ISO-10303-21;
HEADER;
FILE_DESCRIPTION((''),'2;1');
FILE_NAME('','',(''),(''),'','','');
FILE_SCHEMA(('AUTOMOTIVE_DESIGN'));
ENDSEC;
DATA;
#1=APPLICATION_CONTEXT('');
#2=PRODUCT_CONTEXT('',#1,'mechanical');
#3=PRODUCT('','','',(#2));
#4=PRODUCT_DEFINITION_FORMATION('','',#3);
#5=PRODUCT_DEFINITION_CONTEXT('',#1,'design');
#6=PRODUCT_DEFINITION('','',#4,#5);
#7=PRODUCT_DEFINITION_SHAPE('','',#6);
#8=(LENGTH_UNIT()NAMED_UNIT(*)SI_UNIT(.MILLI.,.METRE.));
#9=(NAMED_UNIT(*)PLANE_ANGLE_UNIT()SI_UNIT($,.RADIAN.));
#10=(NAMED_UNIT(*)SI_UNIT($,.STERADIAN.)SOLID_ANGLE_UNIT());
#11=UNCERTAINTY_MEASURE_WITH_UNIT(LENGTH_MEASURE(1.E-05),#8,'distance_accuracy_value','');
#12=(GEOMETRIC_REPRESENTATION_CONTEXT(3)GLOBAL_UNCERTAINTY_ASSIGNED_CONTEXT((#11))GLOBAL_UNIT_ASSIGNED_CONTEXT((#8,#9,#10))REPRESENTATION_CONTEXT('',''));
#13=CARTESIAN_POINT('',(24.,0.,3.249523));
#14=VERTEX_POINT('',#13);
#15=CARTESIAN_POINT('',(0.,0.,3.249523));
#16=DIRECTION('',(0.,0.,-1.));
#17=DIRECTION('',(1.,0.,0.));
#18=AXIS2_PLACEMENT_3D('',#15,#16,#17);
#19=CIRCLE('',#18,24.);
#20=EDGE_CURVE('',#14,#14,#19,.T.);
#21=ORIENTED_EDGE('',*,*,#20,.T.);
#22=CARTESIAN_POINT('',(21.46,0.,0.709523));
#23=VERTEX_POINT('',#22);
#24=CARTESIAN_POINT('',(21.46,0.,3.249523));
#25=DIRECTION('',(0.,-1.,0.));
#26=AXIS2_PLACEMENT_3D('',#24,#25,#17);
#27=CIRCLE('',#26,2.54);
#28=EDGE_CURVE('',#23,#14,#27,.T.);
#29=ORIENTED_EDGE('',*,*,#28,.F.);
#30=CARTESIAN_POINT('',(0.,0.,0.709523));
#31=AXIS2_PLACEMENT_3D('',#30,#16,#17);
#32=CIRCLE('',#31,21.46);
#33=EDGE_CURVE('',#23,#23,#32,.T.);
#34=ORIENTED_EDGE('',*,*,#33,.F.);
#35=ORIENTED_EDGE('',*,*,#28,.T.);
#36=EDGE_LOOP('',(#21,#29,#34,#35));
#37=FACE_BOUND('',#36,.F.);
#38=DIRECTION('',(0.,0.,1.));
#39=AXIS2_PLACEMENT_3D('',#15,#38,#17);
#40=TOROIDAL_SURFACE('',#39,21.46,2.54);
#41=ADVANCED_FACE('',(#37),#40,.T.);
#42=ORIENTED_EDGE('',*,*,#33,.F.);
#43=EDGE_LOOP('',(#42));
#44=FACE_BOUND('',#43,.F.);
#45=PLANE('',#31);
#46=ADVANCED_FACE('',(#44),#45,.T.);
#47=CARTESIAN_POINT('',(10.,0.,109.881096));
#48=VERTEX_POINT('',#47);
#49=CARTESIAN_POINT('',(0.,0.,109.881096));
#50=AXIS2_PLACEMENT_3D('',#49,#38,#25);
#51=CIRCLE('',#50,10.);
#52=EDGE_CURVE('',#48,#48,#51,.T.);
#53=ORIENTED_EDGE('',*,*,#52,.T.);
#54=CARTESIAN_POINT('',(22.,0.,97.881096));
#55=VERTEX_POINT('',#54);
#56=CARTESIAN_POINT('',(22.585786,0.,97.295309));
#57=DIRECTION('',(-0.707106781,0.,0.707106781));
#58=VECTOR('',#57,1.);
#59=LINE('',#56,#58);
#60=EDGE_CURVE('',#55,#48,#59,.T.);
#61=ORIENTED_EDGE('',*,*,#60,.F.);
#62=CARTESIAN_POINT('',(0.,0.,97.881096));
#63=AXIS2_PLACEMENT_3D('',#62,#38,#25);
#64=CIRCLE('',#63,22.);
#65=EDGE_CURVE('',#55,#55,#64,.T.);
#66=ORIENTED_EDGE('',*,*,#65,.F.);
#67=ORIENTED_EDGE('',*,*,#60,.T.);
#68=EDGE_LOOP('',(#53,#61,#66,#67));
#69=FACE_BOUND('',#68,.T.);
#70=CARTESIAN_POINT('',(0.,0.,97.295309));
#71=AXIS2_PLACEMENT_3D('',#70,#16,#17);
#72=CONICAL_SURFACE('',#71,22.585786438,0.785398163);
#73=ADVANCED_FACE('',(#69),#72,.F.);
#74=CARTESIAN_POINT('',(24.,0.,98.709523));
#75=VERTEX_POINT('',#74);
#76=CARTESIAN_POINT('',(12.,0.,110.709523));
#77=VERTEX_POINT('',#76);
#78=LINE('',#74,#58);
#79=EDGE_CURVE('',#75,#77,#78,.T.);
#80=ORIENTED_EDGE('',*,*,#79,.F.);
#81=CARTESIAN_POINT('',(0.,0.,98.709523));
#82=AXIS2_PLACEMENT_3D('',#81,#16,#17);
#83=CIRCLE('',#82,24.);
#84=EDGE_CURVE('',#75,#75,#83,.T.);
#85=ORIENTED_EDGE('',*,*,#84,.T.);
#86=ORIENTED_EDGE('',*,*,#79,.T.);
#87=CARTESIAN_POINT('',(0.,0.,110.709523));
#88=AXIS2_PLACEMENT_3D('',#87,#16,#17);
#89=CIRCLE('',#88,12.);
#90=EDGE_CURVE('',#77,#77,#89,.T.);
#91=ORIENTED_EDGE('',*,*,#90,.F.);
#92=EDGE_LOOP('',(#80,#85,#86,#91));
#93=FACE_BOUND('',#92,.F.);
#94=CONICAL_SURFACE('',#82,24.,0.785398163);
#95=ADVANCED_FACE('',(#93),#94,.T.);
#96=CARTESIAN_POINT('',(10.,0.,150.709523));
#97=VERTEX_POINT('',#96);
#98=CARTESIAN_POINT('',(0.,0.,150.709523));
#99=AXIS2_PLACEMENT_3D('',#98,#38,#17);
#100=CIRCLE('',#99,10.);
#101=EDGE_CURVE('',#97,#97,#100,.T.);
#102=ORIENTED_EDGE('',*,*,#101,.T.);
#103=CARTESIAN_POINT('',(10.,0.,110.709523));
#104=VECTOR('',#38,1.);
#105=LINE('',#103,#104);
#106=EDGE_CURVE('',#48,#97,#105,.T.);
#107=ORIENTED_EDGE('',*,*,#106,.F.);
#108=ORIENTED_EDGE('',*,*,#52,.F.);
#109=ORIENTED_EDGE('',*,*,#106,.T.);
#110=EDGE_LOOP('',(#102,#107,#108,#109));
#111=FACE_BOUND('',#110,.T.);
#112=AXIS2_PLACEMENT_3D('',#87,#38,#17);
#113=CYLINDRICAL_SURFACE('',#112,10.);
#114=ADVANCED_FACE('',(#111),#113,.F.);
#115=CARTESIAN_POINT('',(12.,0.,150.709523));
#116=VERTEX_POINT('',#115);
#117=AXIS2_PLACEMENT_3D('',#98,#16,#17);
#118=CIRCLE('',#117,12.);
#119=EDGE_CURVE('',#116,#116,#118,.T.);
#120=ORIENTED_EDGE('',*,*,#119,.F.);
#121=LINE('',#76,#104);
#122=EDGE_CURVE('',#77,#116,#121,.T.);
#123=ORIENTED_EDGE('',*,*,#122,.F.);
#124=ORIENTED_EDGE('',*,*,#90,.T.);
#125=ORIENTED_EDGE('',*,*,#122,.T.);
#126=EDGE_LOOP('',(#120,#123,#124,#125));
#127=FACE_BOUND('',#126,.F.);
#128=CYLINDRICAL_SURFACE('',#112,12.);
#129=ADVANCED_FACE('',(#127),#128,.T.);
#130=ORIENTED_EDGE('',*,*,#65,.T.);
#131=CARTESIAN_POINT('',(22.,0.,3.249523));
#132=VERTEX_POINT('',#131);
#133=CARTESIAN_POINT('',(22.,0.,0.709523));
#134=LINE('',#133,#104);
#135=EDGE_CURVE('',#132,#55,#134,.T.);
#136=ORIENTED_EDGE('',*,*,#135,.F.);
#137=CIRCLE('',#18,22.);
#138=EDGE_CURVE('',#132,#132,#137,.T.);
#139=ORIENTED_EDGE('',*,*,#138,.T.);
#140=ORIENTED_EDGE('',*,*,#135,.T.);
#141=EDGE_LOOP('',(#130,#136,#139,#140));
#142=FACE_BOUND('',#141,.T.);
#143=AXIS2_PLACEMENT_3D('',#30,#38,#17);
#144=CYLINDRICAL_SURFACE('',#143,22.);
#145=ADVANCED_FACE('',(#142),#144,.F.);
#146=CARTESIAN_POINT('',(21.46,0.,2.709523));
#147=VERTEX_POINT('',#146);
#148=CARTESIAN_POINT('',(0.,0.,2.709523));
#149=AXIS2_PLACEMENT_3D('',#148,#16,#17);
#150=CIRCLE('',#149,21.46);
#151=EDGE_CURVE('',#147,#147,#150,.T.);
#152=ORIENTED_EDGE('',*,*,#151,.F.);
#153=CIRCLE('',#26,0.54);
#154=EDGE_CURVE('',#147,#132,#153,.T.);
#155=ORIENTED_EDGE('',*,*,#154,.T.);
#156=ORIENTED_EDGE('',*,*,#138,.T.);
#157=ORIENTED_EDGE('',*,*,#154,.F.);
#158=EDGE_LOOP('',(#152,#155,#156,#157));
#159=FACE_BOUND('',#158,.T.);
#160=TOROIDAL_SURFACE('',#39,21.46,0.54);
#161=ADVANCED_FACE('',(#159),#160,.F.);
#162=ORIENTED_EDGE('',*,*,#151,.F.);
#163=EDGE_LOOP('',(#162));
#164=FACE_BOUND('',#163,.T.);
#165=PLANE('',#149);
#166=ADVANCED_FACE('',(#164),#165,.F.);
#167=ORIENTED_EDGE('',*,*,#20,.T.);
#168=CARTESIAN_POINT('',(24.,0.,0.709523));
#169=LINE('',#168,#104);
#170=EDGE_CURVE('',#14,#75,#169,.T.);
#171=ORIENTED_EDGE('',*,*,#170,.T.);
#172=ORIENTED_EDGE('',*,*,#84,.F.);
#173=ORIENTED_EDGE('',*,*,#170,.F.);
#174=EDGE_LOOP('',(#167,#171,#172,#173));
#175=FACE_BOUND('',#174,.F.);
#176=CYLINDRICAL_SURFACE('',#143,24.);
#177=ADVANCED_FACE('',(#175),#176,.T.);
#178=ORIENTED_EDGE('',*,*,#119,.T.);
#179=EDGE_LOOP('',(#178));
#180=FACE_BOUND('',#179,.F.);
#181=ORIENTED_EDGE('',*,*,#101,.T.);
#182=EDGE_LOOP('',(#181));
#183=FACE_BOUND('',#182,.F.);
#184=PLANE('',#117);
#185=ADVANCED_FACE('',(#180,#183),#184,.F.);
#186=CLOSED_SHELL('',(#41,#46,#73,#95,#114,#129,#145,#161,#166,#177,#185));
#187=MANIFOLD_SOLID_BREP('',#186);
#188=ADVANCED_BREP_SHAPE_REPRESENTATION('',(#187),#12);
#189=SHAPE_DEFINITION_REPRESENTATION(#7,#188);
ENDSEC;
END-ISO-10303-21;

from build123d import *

# Parameters (mm, degrees)
F2_R = 2.54
F3_T = -2


with BuildPart() as f1:
    # F0 (on Front) → F1 (revolve)
    with BuildSketch(Plane.XZ):
        Polygon((0, 150.7095229592), (0, 0.7095229592), (24, 0.7095229592), (24, 98.7095229592), (12, 110.7095229592), (12, 150.7095229592), align=None)
    revolve(axis=Axis((0, 0, 75.7095229592), (0, 0, -1)))

    # F2
    f2_edges = [f1.edges().sort_by_distance(p)[0] for p in [
        (-24, 0, 0.709523),
    ]]
    fillet(f2_edges, radius=F2_R)

    # F3
    f3_openings = [f1.faces().sort_by_distance(p)[0] for p in [
        (0, 0, 150.709523),
    ]]
    offset(amount=F3_T, openings=f3_openings, kind=Kind.INTERSECTION)


solid = f1.part
